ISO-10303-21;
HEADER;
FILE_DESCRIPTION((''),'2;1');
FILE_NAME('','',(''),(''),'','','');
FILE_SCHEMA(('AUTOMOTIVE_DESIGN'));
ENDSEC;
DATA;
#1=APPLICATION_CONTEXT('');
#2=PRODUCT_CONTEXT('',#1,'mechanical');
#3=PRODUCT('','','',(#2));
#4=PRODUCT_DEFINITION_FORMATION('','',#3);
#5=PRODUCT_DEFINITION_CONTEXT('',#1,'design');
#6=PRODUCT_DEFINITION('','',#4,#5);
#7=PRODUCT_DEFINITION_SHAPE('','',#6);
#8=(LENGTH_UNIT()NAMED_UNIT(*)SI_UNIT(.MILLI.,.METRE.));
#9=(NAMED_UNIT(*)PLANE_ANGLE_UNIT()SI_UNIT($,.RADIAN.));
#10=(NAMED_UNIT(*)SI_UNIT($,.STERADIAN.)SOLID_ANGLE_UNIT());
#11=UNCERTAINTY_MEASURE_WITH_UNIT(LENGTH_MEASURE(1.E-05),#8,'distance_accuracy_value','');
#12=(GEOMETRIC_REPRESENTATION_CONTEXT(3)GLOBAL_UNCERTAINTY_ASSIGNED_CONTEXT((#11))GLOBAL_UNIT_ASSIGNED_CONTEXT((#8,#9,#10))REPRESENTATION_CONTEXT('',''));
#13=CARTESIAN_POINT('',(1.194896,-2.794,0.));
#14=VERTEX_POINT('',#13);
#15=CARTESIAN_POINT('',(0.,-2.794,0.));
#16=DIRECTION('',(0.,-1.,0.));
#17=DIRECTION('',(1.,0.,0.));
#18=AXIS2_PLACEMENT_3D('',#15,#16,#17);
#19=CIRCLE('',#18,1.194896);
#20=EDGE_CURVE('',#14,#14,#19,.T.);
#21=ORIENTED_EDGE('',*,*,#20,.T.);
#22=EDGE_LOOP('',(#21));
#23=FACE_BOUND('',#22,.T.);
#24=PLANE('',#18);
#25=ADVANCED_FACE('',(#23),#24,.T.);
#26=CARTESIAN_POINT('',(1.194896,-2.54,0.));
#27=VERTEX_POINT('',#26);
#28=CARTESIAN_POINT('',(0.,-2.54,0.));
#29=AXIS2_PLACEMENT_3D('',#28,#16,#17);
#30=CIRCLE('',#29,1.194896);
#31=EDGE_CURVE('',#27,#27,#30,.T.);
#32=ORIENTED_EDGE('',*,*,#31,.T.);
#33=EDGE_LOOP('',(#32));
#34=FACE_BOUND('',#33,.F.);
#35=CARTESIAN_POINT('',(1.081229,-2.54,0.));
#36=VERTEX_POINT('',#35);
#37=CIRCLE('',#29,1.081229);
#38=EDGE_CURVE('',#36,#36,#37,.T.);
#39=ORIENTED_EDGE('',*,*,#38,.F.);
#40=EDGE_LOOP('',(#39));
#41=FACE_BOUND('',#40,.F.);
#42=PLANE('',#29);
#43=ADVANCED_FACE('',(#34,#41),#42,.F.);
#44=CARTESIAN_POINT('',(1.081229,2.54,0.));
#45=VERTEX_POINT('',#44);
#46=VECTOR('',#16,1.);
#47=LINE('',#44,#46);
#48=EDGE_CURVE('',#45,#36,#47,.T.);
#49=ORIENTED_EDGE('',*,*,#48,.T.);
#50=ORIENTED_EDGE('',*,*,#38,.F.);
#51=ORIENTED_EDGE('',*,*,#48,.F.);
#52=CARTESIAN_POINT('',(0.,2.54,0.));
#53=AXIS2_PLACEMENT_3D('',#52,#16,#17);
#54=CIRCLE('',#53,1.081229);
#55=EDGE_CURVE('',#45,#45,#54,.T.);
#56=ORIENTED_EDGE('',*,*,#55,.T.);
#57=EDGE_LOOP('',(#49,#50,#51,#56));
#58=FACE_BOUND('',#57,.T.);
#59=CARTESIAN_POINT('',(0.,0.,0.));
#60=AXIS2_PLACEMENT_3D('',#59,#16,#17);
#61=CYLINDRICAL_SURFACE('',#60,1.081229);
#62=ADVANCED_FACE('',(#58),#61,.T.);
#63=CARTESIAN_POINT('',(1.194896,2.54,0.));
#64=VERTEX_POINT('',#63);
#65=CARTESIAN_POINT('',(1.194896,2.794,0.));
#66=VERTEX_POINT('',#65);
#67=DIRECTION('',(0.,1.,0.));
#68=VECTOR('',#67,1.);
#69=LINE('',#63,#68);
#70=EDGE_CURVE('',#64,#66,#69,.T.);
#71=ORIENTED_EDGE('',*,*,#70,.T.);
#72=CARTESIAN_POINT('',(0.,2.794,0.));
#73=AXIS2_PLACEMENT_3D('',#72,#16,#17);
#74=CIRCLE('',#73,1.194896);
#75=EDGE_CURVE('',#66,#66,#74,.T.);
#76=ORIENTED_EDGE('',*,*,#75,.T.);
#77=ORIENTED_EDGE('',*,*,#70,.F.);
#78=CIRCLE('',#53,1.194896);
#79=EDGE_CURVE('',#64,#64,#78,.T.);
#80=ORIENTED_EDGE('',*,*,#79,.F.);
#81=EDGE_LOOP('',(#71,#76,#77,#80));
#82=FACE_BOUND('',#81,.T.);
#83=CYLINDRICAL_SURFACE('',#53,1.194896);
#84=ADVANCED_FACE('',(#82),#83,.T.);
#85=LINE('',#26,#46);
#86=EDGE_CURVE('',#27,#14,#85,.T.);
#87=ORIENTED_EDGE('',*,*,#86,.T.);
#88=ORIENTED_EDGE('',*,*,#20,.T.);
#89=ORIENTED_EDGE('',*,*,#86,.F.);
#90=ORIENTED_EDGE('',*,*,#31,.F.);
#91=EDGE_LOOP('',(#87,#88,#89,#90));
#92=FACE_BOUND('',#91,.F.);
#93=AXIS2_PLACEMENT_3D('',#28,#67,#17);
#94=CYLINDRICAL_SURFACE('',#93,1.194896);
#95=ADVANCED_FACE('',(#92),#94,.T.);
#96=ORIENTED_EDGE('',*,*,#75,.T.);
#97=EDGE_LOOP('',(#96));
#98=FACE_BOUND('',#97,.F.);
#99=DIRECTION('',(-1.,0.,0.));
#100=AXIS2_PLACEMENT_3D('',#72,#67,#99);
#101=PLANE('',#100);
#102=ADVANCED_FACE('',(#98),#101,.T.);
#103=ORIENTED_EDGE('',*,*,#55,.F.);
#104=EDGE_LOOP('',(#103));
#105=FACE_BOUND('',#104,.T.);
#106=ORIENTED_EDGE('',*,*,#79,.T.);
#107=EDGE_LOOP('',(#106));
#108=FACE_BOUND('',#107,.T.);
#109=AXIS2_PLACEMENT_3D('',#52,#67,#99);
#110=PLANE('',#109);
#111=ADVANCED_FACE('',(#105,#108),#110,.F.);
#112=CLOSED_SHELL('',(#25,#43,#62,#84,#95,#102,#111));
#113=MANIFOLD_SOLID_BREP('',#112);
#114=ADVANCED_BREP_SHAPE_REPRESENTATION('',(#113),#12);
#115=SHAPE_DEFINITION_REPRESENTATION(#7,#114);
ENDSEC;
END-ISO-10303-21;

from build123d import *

# Parameters (mm, degrees)
F0_R          = 1.0812294985
F1_DEPTH      = 2.54
F1_DEPTH_BACK = 2.54
F2_R          = 1.1948962621
F3_DEPTH      = 0.254


# Not quite as in the source:
# - a pattern or mirror of a feature is missing from the dataset's text; its kind, count and spacing are read off the source's solid


with BuildPart() as f1:
    # F0 (on Front) → F1 (new body, two sides)
    with BuildSketch(Plane.XZ) as f1_sk:
        Circle(F0_R)
    extrude(amount=F1_DEPTH)
    extrude(f1_sk.sketch, amount=-F1_DEPTH_BACK)

    # F2 (on face) → F3 (join)
    with BuildSketch(Plane.XZ.offset(2.54)):
        Circle(F2_R)
    f3 = extrude(amount=F3_DEPTH)

    # F3_copies: F3 across plane
    add(f3.mirror(Plane.ZX))


solid = f1.part
